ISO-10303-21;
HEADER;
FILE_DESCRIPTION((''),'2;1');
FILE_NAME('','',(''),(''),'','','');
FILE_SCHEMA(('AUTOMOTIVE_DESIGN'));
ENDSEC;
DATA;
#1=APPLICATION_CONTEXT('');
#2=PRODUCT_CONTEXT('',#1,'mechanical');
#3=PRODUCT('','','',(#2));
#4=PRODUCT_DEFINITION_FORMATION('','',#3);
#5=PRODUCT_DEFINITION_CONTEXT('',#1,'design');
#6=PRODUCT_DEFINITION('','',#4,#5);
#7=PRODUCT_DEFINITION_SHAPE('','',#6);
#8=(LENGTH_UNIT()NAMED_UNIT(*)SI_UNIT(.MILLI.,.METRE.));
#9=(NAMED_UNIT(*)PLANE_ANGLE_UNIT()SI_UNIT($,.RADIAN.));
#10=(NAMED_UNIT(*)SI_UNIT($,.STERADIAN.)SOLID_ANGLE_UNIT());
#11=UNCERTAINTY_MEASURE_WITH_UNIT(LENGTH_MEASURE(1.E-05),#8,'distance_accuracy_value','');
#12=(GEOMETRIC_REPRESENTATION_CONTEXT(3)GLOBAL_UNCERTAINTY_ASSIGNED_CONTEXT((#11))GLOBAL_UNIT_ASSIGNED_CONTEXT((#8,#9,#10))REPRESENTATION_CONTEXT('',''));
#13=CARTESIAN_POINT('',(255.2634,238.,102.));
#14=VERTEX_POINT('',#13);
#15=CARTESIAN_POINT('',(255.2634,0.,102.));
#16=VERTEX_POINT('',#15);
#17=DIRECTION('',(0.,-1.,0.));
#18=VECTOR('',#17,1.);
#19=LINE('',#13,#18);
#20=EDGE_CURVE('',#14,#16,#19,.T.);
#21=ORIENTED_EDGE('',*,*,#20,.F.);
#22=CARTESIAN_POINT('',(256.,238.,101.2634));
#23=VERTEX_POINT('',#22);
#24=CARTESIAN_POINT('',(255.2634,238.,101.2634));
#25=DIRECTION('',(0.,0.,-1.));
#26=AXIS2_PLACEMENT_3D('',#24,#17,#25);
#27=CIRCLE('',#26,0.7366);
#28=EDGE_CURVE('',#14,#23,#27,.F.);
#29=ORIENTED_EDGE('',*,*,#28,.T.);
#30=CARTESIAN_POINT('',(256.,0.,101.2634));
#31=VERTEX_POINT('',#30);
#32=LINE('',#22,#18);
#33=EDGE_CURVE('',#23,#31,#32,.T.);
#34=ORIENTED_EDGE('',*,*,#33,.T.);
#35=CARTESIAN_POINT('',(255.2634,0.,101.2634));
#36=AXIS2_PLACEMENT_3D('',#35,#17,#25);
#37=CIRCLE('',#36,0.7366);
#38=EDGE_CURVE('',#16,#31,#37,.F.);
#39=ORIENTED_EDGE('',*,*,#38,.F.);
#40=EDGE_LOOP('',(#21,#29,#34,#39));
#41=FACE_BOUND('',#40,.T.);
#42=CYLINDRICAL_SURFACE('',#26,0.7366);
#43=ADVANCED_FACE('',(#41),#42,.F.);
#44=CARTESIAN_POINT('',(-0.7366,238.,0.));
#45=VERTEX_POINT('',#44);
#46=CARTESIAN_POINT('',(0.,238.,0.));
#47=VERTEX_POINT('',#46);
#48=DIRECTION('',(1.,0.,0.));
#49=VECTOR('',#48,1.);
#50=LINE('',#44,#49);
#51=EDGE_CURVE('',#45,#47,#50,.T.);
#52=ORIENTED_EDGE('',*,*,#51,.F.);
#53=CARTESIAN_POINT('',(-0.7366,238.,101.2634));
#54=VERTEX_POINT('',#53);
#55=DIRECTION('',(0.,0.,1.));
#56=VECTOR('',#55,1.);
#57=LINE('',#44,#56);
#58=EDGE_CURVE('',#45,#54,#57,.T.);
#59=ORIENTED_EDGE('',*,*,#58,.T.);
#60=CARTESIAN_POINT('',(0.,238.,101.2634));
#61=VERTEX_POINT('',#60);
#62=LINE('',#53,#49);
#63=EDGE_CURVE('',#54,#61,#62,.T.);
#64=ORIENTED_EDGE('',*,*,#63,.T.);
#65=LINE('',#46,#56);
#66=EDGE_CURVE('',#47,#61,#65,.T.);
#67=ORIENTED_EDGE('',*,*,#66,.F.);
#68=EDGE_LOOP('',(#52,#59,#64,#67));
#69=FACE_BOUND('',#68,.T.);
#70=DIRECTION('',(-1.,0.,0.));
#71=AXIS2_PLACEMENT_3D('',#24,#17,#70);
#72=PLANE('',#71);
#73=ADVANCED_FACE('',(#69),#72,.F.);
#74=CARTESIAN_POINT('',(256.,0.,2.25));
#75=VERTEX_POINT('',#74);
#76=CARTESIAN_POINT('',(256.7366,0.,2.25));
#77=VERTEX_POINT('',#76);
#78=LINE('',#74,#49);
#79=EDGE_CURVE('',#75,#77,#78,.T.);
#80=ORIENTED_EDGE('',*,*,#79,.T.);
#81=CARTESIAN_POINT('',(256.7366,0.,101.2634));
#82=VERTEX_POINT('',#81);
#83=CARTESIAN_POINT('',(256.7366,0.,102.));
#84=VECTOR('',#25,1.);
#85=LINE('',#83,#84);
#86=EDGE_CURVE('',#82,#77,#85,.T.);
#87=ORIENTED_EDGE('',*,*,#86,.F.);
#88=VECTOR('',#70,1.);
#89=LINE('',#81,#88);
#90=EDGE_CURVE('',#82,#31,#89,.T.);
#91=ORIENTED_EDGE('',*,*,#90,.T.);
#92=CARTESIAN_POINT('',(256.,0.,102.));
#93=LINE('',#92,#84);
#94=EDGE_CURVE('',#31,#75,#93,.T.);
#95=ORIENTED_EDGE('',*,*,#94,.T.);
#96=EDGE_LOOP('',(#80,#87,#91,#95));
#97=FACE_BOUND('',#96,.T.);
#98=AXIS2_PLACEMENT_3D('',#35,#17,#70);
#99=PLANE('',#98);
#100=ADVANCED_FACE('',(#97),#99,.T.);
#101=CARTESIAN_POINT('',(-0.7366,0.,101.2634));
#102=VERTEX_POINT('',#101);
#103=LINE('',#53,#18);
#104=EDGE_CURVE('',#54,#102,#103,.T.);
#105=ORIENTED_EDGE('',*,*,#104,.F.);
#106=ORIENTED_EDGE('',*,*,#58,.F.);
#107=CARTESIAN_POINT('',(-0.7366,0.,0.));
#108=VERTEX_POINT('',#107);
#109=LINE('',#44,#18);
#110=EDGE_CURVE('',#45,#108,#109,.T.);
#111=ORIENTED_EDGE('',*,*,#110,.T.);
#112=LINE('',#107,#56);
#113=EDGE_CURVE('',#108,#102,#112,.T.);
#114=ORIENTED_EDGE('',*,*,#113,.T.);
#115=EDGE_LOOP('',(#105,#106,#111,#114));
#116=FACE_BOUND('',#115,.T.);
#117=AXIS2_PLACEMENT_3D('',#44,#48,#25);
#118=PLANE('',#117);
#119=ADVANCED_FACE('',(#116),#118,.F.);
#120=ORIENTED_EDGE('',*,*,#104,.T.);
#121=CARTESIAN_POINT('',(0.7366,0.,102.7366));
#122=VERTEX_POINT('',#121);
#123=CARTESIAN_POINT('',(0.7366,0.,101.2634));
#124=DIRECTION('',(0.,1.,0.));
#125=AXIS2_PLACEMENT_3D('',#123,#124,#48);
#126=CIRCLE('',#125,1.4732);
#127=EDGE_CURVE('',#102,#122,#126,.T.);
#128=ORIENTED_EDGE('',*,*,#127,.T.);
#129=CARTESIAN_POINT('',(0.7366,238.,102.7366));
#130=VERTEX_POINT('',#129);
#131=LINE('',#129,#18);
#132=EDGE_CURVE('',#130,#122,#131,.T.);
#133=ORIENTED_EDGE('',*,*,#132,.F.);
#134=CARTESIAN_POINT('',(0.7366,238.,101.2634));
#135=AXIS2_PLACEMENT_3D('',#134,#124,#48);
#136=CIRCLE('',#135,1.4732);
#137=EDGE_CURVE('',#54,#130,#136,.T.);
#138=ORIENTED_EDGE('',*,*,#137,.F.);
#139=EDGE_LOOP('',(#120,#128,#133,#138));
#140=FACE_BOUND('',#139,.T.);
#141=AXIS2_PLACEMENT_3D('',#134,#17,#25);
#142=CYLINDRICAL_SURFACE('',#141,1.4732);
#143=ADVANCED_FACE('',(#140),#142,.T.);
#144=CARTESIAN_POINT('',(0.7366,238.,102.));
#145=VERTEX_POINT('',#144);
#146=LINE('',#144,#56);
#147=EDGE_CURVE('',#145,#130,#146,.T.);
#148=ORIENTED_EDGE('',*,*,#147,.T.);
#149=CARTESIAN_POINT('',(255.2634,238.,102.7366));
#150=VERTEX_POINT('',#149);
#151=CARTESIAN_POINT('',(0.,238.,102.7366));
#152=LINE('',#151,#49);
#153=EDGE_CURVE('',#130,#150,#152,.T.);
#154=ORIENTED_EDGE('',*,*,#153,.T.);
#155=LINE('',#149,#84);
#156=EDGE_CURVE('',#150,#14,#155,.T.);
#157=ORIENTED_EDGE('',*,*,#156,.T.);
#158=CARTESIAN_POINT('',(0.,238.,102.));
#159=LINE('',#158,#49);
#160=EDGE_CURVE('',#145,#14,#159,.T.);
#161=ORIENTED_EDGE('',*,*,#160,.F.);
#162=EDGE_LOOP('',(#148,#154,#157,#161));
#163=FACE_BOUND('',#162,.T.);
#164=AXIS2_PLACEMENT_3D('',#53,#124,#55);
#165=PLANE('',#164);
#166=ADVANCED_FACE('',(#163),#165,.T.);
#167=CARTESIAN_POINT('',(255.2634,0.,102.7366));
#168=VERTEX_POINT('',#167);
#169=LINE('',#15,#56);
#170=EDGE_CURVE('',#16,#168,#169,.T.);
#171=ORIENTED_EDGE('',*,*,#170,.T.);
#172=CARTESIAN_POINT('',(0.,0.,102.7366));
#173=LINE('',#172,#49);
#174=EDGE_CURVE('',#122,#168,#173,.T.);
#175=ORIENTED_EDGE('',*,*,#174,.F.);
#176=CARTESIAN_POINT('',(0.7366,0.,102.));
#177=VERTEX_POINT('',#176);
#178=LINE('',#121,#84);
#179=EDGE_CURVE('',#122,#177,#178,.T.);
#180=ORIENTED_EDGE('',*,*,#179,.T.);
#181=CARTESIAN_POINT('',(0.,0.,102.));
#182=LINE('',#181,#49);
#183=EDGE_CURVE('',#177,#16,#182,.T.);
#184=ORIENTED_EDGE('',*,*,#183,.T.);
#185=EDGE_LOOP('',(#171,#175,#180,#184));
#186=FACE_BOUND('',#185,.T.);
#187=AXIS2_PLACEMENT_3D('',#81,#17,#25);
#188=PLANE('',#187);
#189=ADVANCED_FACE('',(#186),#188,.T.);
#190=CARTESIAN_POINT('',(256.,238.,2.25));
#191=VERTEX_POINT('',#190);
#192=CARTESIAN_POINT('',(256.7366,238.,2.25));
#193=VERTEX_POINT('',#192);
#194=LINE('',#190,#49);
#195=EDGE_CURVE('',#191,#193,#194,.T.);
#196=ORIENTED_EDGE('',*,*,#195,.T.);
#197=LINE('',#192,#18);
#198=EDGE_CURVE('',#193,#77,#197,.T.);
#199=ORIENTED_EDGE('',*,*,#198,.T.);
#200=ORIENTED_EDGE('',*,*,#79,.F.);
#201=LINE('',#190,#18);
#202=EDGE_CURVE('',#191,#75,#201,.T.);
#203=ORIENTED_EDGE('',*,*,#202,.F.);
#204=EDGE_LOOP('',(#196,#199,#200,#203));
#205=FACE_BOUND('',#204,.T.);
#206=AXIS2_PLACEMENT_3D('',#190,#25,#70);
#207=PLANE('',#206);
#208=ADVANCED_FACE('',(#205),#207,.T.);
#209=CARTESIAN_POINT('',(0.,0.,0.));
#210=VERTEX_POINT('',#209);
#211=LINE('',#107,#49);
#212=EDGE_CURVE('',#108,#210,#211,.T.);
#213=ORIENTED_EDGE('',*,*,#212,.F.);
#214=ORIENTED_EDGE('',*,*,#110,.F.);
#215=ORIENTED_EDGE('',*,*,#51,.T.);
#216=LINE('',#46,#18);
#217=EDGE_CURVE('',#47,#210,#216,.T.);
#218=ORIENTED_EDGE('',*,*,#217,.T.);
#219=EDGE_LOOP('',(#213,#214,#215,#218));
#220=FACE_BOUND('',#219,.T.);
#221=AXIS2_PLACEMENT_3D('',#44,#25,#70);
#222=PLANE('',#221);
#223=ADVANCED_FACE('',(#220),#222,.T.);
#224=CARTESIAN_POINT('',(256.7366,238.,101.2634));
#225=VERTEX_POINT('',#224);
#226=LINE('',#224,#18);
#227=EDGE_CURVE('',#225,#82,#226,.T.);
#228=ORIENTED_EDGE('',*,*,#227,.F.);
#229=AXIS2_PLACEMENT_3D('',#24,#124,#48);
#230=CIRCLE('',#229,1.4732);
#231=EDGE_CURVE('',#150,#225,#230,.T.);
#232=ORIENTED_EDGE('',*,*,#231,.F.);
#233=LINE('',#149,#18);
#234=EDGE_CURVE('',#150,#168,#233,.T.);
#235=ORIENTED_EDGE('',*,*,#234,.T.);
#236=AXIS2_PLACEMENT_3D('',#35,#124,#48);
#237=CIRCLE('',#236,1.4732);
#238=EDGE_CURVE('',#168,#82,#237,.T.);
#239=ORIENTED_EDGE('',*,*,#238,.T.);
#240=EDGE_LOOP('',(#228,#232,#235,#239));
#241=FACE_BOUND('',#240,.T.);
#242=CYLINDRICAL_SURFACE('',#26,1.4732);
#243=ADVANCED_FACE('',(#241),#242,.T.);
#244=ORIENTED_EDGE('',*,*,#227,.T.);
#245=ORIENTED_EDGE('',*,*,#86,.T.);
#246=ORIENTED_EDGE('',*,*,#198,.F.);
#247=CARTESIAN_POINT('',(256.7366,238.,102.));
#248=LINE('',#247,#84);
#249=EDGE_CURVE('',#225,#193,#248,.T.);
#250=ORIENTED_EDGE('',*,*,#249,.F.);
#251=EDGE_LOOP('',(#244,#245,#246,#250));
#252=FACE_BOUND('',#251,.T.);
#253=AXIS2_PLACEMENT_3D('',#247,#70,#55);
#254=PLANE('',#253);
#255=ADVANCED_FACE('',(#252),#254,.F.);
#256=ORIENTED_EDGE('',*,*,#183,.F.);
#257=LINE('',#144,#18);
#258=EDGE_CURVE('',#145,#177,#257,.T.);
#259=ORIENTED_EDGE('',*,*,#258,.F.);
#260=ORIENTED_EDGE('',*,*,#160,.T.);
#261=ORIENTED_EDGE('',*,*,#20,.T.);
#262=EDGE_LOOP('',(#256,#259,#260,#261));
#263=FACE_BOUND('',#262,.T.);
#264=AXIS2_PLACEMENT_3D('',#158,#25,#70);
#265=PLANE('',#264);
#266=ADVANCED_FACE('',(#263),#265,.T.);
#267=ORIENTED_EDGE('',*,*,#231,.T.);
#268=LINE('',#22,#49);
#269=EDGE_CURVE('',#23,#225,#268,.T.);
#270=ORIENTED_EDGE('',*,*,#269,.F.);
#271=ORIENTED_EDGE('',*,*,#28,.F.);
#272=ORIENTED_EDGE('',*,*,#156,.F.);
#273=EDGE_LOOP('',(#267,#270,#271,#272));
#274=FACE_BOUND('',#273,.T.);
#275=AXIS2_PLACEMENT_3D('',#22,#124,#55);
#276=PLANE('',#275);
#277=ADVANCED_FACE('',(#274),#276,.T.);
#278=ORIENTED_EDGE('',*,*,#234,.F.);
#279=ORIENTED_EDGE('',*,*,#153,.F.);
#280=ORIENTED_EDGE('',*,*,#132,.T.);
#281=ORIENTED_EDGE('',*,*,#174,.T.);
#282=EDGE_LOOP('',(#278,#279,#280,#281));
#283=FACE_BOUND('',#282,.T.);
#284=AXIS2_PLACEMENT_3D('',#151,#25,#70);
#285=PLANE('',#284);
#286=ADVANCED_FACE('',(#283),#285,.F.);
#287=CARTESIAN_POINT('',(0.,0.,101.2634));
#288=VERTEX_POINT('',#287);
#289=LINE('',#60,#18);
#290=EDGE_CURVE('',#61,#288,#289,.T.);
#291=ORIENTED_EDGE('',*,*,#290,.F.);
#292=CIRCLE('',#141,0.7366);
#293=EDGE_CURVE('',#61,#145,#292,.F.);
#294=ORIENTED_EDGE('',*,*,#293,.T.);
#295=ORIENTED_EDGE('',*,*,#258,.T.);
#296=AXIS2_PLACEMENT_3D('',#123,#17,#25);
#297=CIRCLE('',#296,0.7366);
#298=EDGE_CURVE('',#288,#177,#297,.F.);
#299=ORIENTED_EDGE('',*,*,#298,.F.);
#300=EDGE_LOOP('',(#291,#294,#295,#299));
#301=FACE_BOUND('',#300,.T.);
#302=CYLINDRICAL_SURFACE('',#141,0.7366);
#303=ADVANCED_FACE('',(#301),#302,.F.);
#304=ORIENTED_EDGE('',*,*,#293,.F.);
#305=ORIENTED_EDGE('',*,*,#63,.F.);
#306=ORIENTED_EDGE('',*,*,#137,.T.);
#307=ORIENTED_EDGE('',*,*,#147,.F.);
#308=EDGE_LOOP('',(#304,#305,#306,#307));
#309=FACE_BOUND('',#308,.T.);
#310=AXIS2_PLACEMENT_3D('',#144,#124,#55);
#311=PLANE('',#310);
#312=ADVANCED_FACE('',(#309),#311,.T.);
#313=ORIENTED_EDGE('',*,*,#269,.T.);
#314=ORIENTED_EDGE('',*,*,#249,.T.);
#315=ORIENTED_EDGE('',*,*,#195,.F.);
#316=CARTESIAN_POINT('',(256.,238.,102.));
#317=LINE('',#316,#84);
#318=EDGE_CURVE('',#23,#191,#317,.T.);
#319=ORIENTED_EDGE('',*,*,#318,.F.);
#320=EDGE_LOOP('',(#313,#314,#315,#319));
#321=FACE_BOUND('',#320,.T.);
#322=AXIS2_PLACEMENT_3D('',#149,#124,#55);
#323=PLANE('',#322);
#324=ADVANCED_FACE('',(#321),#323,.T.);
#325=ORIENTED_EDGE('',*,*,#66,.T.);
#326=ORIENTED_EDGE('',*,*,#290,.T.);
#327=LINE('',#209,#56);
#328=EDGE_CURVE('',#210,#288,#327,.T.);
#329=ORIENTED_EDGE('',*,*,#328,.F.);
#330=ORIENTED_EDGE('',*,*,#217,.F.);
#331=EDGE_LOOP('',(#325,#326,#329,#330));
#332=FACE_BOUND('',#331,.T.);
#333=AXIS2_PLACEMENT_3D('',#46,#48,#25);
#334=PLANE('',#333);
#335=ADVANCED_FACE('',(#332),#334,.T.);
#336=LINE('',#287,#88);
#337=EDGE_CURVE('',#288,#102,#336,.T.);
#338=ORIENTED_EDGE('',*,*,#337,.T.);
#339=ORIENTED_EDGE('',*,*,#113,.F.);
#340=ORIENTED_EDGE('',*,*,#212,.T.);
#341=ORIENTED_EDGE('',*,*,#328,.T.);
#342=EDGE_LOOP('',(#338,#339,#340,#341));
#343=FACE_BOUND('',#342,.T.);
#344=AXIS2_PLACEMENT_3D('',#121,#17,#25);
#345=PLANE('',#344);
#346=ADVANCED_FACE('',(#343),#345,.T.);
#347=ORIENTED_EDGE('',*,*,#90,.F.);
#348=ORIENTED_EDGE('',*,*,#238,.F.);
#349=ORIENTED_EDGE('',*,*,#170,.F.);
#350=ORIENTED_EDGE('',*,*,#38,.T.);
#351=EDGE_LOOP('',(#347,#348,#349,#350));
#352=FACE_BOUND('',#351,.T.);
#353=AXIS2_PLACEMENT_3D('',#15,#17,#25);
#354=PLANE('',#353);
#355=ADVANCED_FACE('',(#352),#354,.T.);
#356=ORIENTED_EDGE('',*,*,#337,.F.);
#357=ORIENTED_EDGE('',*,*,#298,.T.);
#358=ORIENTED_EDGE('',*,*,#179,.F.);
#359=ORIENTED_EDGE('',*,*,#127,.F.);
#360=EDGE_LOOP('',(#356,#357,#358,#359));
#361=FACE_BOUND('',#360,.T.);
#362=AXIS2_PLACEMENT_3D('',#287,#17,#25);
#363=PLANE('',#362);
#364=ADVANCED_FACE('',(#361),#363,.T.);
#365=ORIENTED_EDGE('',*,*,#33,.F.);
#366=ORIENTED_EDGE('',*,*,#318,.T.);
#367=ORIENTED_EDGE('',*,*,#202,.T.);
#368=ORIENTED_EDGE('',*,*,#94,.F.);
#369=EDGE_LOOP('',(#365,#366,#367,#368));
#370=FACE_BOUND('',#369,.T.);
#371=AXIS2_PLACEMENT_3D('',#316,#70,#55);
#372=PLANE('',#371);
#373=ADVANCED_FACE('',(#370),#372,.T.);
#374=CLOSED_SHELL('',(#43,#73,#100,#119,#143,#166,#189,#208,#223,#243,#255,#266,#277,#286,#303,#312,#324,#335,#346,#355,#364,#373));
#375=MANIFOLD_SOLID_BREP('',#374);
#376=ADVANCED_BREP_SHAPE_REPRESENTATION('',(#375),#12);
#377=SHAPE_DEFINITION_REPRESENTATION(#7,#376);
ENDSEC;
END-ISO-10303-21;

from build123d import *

# Parameters (mm, degrees)
BASE_FLANGE1_DEPTH = 238


# Sheet-metal steps are written as plain solids
with BuildPart() as part:
    # Sketch1 → Base-Flange1 (new body)
    with BuildSketch(Plane(origin=(0, 0, 0), x_dir=(1, 0, 0), z_dir=(0, 1, 0))):
        with BuildLine():
            Line((0, 0), (0, -101.2634))
            ThreePointArc((0, -101.2634), (0.215745145, -101.784254855), (0.7366, -102))
            Line((0.7366, -102), (255.2634, -102))
            ThreePointArc((255.2634, -102), (255.784254855, -101.784254855), (256, -101.2634))
            Line((256, -101.2634), (256, -2.25))
            Line((256, -2.25), (256.7366, -2.25))
            Line((256.7366, -2.25), (256.7366, -101.2634))
            ThreePointArc((256.7366, -101.2634), (256.30510971, -102.30510971), (255.2634, -102.7366))
            Line((255.2634, -102.7366), (0.7366, -102.7366))
            ThreePointArc((0.7366, -102.7366), (-0.30510971, -102.30510971), (-0.7366, -101.2634))
            Line((-0.7366, -101.2634), (-0.7366, 0))
            Line((-0.7366, 0), (0, 0))
        make_face()
    extrude(amount=BASE_FLANGE1_DEPTH)


solid = part.part
